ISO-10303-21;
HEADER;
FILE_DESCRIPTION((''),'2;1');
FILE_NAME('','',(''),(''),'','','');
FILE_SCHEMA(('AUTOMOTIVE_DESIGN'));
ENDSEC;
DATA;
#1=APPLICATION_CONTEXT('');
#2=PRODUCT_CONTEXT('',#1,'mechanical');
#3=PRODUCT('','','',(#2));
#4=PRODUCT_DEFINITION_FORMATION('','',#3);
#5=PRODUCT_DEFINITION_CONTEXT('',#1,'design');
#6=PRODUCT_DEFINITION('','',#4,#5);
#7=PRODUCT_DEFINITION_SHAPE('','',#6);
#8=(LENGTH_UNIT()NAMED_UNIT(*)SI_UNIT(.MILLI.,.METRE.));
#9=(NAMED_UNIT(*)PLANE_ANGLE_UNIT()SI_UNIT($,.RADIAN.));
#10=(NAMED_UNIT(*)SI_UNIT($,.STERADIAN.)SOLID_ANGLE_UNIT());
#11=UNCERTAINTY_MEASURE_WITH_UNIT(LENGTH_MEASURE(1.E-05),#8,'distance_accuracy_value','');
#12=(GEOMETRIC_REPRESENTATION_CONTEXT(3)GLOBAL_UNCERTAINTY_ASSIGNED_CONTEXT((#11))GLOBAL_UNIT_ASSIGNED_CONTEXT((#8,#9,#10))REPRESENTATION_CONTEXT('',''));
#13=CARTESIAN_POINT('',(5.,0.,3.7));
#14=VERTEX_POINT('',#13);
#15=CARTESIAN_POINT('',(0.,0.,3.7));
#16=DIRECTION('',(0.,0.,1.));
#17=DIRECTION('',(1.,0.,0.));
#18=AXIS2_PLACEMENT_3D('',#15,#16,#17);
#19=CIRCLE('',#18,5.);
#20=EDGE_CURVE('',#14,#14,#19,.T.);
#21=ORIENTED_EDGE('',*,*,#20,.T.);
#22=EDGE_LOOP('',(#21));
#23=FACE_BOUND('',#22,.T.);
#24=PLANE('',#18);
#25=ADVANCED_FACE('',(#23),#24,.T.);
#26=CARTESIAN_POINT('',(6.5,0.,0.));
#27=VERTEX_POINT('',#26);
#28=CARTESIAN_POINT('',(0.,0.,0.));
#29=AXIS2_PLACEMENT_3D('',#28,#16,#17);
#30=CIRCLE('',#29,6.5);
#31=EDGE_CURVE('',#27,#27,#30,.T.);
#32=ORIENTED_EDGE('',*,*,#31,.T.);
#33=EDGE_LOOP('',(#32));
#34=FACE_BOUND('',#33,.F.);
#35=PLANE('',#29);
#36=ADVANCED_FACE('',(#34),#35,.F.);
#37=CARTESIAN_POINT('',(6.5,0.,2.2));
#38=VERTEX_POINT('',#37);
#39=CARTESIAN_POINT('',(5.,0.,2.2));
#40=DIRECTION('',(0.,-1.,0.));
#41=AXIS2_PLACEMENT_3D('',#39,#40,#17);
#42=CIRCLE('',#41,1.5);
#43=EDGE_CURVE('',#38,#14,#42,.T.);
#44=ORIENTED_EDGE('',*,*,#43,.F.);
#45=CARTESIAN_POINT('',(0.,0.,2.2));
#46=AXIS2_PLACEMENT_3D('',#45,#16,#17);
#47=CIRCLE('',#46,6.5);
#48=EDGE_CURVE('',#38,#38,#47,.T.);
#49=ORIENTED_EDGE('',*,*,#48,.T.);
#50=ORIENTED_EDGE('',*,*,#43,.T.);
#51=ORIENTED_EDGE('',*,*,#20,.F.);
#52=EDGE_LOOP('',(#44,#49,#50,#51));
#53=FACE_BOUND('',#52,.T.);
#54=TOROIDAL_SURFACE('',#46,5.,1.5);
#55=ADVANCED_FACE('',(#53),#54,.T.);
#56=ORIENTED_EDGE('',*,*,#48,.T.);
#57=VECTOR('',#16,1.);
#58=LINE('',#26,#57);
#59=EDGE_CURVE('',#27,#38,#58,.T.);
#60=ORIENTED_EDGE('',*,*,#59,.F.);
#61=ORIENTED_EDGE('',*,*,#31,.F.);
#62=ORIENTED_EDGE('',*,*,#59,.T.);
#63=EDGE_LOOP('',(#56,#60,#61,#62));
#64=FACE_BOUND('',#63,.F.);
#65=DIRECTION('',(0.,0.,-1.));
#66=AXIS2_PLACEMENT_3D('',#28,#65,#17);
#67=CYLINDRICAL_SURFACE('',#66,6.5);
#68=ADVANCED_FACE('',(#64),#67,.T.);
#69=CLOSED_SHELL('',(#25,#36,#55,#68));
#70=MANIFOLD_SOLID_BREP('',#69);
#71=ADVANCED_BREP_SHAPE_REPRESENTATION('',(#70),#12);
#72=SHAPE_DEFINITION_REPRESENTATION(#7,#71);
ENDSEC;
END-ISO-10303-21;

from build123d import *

# Parameters (mm, degrees)
F0_R     = 6.5
F1_DEPTH = 3.7
F2_R     = 1.5


# Not quite as in the source:
# - a feature of the source that left no trace in its solid (it failed there, or was rolled back) is left out


with BuildPart() as f1:
    # F0 (on Top) → F1 (new body)
    with BuildSketch(Plane.XY):
        Circle(F0_R)
    extrude(amount=F1_DEPTH)

    # F2
    f2_edges = [f1.edges().sort_by_distance(p)[0] for p in [
        (-6.5, 0, 3.7),
    ]]
    fillet(f2_edges, radius=F2_R)


solid = f1.part
